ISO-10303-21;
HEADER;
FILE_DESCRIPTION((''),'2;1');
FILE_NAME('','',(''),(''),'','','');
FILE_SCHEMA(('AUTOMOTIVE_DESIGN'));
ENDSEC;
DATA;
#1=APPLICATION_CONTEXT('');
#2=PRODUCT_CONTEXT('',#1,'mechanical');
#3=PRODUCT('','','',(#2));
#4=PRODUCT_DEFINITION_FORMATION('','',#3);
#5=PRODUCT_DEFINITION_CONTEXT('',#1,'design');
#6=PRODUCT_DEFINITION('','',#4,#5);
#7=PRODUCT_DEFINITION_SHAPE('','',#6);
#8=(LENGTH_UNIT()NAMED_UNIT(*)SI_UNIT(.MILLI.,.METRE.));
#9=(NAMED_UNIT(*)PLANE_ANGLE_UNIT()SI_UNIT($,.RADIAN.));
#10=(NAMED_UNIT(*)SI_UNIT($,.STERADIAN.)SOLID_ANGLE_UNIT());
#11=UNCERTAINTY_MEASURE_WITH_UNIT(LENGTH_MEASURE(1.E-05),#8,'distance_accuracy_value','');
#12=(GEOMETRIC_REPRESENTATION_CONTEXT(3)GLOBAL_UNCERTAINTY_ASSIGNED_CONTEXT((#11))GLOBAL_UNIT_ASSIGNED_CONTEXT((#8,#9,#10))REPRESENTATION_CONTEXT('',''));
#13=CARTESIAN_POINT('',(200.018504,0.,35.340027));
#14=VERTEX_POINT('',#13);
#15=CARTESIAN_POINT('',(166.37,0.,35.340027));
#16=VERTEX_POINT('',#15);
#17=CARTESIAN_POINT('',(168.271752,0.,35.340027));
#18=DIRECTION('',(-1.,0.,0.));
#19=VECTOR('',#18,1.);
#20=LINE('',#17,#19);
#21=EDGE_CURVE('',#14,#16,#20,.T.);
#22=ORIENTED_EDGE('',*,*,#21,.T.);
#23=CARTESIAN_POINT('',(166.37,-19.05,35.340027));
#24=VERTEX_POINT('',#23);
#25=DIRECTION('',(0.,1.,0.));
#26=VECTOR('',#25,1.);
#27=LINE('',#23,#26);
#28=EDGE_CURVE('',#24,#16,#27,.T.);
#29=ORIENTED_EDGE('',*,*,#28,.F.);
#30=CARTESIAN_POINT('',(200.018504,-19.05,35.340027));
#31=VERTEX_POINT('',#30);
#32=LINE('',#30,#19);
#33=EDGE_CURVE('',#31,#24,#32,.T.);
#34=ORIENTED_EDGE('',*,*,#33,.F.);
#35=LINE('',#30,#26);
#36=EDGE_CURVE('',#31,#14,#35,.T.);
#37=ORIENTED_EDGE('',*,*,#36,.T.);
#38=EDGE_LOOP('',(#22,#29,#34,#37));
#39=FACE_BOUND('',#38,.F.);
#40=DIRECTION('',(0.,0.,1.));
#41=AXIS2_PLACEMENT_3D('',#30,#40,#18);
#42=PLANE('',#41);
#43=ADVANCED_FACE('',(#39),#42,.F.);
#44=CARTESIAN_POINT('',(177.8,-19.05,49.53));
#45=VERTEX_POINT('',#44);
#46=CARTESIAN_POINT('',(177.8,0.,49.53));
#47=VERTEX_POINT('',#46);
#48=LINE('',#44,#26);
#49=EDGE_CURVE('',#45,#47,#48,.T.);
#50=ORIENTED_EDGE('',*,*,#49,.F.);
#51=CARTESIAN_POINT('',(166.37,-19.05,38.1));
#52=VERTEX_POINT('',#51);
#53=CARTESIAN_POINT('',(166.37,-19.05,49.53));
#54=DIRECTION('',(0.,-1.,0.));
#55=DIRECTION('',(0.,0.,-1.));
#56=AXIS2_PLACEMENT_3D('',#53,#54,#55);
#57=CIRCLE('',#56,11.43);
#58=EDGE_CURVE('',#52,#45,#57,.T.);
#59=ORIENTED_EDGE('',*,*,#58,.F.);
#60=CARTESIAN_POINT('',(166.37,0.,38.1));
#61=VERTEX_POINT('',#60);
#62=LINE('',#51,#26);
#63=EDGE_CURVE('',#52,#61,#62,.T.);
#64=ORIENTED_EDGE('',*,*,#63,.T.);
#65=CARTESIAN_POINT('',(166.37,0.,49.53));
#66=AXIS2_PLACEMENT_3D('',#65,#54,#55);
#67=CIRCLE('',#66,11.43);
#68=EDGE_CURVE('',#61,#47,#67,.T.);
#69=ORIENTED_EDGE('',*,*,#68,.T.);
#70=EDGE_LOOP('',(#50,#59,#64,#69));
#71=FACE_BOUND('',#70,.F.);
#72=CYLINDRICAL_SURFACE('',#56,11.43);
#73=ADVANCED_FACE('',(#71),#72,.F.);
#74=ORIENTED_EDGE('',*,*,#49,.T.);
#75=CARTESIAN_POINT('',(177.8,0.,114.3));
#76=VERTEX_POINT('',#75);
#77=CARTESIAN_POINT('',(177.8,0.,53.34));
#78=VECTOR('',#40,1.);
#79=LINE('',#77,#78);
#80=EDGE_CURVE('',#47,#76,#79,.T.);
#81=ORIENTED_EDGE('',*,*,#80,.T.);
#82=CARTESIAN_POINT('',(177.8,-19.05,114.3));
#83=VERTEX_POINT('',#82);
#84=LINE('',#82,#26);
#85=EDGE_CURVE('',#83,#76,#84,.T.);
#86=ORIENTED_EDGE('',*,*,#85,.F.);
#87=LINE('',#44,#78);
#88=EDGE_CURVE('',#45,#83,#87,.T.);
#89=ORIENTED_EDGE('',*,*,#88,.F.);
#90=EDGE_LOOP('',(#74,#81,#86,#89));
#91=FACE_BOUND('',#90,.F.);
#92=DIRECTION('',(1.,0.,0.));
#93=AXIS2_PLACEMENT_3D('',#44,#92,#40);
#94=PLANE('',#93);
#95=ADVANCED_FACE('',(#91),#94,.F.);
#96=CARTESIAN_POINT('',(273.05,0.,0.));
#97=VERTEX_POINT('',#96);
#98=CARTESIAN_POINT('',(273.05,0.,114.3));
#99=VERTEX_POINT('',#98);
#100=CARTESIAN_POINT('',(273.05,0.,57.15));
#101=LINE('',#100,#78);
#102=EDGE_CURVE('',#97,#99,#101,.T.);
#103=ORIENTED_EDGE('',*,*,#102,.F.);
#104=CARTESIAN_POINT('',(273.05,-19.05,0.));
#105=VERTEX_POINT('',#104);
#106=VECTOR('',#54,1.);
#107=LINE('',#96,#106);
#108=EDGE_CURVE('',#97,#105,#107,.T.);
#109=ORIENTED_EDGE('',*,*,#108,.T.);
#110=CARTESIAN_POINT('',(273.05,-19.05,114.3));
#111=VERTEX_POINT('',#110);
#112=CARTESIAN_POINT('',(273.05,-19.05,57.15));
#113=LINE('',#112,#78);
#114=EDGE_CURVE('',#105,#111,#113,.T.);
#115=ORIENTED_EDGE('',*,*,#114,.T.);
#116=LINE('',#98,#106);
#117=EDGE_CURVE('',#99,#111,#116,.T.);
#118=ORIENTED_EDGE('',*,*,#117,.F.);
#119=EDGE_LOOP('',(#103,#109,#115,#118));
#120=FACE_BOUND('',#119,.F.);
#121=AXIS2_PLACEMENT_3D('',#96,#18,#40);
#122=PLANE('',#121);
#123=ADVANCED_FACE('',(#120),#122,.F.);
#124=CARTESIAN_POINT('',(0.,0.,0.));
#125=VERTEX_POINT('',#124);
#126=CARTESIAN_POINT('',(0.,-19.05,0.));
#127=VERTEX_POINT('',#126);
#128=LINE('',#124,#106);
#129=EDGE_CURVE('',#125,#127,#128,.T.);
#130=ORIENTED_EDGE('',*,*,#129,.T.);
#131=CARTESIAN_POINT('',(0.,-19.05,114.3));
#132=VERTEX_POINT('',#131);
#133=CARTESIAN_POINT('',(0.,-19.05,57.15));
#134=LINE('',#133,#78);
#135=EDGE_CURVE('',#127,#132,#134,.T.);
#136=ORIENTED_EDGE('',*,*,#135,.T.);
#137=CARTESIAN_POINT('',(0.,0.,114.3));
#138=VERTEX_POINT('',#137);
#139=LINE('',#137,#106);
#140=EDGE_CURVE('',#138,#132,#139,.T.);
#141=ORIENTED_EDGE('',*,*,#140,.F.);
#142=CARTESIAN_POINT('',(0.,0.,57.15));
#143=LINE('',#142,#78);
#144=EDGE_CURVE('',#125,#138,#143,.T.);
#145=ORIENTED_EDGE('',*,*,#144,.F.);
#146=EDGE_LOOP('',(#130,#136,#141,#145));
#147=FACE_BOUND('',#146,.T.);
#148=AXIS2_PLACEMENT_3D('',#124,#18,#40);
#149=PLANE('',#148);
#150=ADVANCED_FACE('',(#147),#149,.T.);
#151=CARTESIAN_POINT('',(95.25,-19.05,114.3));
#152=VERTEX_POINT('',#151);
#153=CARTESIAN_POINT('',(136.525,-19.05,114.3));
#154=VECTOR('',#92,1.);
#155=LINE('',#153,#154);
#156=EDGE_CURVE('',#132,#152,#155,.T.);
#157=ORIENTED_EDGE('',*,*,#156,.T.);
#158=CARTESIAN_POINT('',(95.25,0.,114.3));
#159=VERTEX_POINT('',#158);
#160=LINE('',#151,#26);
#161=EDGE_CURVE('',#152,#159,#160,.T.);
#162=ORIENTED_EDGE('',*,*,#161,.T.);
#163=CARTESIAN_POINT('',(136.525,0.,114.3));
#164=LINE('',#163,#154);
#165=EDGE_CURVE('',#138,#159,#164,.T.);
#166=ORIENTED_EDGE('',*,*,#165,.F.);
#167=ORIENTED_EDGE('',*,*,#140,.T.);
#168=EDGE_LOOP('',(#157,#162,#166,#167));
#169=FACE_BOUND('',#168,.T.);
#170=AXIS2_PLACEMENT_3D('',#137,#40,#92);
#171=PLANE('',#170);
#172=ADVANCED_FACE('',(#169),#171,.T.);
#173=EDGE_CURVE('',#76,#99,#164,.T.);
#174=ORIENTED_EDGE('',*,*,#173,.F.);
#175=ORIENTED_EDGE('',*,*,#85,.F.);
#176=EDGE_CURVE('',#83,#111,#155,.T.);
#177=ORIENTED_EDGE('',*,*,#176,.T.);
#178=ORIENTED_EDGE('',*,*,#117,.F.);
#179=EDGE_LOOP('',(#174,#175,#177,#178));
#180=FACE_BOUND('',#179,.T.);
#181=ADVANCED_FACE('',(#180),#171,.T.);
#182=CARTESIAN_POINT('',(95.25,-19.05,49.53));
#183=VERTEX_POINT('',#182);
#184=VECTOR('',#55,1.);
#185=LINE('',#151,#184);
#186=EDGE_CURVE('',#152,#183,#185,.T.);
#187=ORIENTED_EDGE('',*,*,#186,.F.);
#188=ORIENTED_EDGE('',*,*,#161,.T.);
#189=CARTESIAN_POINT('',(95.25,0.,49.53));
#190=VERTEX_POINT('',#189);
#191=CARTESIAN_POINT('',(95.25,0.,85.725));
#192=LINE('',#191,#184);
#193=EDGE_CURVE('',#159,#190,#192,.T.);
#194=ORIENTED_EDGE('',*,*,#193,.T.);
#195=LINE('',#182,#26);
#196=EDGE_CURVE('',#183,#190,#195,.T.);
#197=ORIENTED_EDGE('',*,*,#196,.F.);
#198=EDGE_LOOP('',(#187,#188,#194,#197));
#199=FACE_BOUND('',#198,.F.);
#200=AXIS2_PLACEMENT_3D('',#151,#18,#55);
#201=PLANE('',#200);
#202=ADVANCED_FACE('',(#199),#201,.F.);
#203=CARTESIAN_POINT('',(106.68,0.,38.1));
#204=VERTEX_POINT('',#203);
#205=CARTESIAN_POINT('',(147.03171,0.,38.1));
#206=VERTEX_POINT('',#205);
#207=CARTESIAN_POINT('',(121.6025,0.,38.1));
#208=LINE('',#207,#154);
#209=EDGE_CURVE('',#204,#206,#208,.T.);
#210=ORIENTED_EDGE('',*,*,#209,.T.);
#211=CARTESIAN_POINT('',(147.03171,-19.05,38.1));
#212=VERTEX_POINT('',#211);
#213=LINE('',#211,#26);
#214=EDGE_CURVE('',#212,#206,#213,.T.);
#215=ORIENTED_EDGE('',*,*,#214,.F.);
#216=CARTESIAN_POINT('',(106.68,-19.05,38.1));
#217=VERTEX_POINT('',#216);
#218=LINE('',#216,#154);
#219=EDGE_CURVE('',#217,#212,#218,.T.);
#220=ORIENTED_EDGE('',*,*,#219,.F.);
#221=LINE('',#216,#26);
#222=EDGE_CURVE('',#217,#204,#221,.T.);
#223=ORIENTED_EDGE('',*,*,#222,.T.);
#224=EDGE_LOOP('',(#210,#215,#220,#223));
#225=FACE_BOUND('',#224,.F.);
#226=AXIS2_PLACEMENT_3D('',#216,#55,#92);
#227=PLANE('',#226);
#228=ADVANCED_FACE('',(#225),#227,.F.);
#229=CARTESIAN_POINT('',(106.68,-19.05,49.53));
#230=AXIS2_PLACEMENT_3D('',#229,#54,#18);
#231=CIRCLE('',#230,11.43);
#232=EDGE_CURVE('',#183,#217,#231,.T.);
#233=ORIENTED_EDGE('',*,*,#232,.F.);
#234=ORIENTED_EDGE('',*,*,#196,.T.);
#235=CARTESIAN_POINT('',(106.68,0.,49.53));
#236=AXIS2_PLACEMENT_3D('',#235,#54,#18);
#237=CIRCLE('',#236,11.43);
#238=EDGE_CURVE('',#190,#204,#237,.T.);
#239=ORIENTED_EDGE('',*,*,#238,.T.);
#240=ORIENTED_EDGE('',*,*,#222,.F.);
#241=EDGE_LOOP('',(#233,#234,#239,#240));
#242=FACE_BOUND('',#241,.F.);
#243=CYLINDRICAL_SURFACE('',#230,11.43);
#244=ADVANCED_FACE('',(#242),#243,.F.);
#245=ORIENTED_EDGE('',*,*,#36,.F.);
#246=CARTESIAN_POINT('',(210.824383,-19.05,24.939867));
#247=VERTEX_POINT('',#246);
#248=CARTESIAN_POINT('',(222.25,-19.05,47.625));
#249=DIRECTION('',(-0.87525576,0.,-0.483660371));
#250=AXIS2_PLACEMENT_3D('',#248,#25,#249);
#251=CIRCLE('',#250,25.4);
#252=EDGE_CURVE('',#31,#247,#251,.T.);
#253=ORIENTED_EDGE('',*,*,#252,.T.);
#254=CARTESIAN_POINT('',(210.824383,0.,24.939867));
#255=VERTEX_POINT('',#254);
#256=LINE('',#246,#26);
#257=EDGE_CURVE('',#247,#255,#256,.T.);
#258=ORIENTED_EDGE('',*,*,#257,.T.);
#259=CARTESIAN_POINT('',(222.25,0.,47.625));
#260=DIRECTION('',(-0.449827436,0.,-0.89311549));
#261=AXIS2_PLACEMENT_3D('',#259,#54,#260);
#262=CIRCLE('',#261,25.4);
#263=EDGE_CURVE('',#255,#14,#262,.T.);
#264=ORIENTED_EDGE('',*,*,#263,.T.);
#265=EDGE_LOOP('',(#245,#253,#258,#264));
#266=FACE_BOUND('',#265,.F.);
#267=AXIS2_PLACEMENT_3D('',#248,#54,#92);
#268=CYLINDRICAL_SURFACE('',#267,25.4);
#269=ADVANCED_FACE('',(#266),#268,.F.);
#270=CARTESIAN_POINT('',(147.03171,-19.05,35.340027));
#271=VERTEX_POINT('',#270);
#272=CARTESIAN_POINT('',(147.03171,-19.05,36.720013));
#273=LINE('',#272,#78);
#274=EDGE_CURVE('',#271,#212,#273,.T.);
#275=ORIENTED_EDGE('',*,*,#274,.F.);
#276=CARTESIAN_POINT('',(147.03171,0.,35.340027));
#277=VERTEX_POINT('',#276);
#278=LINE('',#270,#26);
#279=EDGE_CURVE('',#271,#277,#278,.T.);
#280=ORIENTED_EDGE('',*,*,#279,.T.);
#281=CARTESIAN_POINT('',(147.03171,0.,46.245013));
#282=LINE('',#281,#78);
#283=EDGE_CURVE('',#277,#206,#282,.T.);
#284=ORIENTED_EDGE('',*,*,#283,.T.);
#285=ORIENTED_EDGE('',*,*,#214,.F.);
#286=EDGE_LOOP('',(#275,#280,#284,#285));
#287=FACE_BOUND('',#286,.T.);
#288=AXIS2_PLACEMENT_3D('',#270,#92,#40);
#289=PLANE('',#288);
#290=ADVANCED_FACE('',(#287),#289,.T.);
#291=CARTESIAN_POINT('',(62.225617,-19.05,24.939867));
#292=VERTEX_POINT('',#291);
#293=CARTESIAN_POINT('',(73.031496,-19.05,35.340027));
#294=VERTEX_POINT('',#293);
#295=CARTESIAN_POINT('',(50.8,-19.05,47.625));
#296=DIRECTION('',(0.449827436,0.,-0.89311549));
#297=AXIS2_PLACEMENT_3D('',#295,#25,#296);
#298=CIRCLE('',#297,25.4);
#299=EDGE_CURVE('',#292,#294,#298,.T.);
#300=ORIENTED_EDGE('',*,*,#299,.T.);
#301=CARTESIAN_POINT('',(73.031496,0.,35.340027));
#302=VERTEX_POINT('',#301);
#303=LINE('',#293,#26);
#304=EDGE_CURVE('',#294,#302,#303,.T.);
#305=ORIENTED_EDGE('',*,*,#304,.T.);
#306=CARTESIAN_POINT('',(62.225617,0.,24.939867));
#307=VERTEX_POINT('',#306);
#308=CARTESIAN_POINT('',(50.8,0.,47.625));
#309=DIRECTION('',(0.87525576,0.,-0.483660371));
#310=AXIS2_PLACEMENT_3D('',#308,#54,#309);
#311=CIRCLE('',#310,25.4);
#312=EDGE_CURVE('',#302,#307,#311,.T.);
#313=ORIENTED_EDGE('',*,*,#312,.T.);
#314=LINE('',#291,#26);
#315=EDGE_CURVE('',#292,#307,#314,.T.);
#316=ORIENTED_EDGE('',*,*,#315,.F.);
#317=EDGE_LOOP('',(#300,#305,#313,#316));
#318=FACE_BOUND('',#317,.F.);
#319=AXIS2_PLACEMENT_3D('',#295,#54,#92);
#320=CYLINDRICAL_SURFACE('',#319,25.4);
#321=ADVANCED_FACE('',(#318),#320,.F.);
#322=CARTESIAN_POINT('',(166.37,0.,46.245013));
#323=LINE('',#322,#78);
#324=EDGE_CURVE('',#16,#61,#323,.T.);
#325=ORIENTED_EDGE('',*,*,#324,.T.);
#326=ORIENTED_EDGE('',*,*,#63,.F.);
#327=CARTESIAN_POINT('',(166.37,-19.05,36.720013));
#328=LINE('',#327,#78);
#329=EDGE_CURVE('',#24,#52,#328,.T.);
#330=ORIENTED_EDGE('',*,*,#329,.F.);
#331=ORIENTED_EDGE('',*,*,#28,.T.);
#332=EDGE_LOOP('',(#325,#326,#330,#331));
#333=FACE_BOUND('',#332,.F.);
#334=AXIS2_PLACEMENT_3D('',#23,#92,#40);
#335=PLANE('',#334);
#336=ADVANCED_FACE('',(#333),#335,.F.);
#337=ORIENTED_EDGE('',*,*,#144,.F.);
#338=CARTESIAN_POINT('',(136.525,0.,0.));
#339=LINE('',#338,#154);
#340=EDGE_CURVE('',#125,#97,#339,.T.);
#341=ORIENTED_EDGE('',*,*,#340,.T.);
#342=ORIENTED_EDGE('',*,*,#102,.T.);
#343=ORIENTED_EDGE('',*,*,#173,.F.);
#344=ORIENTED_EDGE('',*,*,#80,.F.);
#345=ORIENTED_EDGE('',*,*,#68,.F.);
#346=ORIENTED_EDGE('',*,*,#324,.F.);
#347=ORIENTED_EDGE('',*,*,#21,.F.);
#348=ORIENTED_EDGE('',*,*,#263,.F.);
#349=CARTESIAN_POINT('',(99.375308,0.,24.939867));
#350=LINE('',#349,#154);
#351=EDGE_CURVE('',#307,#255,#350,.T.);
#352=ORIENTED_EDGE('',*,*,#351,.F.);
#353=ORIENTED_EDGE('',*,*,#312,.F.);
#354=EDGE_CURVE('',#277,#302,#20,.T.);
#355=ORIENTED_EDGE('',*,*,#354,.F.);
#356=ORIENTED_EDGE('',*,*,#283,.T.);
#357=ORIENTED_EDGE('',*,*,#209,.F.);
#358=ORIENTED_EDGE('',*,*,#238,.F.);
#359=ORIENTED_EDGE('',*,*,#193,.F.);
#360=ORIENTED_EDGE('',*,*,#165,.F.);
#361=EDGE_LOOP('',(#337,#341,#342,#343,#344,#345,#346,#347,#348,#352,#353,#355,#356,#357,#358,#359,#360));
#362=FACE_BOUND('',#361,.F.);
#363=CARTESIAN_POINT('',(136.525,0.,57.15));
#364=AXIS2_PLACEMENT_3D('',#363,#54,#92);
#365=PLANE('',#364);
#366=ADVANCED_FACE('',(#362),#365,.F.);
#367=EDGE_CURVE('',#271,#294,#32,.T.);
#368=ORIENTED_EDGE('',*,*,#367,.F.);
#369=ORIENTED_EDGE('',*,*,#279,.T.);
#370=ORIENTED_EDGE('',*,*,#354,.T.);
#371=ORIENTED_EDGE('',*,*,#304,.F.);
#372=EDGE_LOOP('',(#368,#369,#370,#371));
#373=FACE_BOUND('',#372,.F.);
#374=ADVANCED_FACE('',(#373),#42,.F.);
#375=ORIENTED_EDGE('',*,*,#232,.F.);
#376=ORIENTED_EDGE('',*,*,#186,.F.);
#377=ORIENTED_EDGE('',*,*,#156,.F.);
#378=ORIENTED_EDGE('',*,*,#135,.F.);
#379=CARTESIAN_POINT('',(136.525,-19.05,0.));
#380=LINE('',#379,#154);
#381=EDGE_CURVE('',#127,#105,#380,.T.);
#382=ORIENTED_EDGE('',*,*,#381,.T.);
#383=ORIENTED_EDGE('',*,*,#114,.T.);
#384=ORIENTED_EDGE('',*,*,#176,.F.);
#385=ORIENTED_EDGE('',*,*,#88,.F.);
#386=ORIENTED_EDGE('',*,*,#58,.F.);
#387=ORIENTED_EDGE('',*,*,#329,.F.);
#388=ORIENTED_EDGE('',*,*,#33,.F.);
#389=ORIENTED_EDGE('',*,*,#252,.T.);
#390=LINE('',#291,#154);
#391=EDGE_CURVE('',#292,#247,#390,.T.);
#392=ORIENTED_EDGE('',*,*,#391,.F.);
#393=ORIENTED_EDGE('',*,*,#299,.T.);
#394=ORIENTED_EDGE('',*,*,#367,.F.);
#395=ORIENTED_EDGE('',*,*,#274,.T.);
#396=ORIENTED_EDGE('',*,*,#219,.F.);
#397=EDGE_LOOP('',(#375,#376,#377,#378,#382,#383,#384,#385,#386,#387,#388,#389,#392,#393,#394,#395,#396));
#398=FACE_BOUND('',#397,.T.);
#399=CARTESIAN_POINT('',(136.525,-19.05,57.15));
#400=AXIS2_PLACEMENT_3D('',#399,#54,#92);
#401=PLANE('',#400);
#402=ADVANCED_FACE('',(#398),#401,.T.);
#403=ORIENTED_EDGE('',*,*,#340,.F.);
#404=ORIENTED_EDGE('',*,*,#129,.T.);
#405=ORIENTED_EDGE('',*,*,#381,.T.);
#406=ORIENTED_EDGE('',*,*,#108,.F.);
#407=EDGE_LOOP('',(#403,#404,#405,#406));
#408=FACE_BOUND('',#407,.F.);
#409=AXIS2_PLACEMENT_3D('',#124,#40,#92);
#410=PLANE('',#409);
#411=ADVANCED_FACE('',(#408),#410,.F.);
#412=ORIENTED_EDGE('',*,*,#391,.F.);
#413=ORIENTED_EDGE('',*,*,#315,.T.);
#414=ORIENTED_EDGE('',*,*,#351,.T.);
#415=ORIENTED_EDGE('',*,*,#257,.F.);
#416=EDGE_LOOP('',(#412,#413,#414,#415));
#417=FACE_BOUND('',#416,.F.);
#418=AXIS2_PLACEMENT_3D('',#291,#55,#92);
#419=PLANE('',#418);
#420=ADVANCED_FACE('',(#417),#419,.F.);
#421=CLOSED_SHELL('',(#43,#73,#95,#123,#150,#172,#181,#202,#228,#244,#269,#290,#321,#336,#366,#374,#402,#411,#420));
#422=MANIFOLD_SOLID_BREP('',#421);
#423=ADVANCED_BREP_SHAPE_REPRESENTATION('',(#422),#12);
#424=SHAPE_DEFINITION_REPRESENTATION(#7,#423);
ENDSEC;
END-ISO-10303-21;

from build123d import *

# Parameters (mm, degrees)
F0_W     = 273.05
F0_H     = 114.3
F1_DEPTH = 19.05
F2_R     = 25.4
F3_DEPTH = 25.4
F5_DEPTH = 25.4
F7_DEPTH = 25.4
F8_W     = 19.3382904482
F8_H     = 2.7599734166
F9_DEPTH = 25.4


# Not quite as in the source:
# - a feature names something its author has since deleted; it is built from what else it names


with BuildPart() as f1:
    # F0 (on Front) → F1 (new body)
    with BuildSketch(Plane.XZ):
        with Locations((136.525, 57.15)):
            Rectangle(F0_W, F0_H)
    extrude(amount=F1_DEPTH)

    # F2 (on face) → F3 (cut)
    with BuildSketch(Plane.XZ.offset(19.05)):
        with Locations((50.8, 47.625)):
            Circle(F2_R)
        with Locations((222.25, 47.625)):
            Circle(F2_R)
    extrude(amount=-F3_DEPTH, mode=Mode.SUBTRACT)

    # F4 (on face) → F5 (cut)
    with BuildSketch(Plane.XZ.offset(19.05)):
        with BuildLine():
            Line((200.0185036906, 35.3400265834), (73.0314963094, 35.3400265834))
            ThreePointArc((73.0314963094, 35.3400265834), (68.4136636998, 29.3242117364), (62.225616864, 24.9398665581))
            Line((62.225616864, 24.9398665581), (210.824383136, 24.9398665581))
            ThreePointArc((210.824383136, 24.9398665581), (204.6363363002, 29.3242117364), (200.0185036906, 35.3400265834))
        make_face()
    extrude(amount=-F5_DEPTH, mode=Mode.SUBTRACT)

    # F6 (on face) → F7 (cut)
    with BuildSketch(Plane.XZ.offset(19.05)):
        with BuildLine():
            Line((177.8, 114.3), (95.25, 114.3))
            Line((95.25, 114.3), (95.25, 49.53))
            ThreePointArc((95.25, 49.53), (98.597769491, 41.447769491), (106.68, 38.1))
            Line((106.68, 38.1), (166.37, 38.1))
            ThreePointArc((166.37, 38.1), (174.452230509, 41.447769491), (177.8, 49.53))
            Line((177.8, 49.53), (177.8, 114.3))
        make_face()
    extrude(amount=-F7_DEPTH, mode=Mode.SUBTRACT)

    # F8 (on face) → F9 (cut)
    with BuildSketch(Plane.XZ.offset(19.05)):
        with Locations((156.7008547759, 36.7200132917)):
            Rectangle(F8_W, F8_H)
    extrude(amount=-F9_DEPTH, mode=Mode.SUBTRACT)


solid = f1.part
